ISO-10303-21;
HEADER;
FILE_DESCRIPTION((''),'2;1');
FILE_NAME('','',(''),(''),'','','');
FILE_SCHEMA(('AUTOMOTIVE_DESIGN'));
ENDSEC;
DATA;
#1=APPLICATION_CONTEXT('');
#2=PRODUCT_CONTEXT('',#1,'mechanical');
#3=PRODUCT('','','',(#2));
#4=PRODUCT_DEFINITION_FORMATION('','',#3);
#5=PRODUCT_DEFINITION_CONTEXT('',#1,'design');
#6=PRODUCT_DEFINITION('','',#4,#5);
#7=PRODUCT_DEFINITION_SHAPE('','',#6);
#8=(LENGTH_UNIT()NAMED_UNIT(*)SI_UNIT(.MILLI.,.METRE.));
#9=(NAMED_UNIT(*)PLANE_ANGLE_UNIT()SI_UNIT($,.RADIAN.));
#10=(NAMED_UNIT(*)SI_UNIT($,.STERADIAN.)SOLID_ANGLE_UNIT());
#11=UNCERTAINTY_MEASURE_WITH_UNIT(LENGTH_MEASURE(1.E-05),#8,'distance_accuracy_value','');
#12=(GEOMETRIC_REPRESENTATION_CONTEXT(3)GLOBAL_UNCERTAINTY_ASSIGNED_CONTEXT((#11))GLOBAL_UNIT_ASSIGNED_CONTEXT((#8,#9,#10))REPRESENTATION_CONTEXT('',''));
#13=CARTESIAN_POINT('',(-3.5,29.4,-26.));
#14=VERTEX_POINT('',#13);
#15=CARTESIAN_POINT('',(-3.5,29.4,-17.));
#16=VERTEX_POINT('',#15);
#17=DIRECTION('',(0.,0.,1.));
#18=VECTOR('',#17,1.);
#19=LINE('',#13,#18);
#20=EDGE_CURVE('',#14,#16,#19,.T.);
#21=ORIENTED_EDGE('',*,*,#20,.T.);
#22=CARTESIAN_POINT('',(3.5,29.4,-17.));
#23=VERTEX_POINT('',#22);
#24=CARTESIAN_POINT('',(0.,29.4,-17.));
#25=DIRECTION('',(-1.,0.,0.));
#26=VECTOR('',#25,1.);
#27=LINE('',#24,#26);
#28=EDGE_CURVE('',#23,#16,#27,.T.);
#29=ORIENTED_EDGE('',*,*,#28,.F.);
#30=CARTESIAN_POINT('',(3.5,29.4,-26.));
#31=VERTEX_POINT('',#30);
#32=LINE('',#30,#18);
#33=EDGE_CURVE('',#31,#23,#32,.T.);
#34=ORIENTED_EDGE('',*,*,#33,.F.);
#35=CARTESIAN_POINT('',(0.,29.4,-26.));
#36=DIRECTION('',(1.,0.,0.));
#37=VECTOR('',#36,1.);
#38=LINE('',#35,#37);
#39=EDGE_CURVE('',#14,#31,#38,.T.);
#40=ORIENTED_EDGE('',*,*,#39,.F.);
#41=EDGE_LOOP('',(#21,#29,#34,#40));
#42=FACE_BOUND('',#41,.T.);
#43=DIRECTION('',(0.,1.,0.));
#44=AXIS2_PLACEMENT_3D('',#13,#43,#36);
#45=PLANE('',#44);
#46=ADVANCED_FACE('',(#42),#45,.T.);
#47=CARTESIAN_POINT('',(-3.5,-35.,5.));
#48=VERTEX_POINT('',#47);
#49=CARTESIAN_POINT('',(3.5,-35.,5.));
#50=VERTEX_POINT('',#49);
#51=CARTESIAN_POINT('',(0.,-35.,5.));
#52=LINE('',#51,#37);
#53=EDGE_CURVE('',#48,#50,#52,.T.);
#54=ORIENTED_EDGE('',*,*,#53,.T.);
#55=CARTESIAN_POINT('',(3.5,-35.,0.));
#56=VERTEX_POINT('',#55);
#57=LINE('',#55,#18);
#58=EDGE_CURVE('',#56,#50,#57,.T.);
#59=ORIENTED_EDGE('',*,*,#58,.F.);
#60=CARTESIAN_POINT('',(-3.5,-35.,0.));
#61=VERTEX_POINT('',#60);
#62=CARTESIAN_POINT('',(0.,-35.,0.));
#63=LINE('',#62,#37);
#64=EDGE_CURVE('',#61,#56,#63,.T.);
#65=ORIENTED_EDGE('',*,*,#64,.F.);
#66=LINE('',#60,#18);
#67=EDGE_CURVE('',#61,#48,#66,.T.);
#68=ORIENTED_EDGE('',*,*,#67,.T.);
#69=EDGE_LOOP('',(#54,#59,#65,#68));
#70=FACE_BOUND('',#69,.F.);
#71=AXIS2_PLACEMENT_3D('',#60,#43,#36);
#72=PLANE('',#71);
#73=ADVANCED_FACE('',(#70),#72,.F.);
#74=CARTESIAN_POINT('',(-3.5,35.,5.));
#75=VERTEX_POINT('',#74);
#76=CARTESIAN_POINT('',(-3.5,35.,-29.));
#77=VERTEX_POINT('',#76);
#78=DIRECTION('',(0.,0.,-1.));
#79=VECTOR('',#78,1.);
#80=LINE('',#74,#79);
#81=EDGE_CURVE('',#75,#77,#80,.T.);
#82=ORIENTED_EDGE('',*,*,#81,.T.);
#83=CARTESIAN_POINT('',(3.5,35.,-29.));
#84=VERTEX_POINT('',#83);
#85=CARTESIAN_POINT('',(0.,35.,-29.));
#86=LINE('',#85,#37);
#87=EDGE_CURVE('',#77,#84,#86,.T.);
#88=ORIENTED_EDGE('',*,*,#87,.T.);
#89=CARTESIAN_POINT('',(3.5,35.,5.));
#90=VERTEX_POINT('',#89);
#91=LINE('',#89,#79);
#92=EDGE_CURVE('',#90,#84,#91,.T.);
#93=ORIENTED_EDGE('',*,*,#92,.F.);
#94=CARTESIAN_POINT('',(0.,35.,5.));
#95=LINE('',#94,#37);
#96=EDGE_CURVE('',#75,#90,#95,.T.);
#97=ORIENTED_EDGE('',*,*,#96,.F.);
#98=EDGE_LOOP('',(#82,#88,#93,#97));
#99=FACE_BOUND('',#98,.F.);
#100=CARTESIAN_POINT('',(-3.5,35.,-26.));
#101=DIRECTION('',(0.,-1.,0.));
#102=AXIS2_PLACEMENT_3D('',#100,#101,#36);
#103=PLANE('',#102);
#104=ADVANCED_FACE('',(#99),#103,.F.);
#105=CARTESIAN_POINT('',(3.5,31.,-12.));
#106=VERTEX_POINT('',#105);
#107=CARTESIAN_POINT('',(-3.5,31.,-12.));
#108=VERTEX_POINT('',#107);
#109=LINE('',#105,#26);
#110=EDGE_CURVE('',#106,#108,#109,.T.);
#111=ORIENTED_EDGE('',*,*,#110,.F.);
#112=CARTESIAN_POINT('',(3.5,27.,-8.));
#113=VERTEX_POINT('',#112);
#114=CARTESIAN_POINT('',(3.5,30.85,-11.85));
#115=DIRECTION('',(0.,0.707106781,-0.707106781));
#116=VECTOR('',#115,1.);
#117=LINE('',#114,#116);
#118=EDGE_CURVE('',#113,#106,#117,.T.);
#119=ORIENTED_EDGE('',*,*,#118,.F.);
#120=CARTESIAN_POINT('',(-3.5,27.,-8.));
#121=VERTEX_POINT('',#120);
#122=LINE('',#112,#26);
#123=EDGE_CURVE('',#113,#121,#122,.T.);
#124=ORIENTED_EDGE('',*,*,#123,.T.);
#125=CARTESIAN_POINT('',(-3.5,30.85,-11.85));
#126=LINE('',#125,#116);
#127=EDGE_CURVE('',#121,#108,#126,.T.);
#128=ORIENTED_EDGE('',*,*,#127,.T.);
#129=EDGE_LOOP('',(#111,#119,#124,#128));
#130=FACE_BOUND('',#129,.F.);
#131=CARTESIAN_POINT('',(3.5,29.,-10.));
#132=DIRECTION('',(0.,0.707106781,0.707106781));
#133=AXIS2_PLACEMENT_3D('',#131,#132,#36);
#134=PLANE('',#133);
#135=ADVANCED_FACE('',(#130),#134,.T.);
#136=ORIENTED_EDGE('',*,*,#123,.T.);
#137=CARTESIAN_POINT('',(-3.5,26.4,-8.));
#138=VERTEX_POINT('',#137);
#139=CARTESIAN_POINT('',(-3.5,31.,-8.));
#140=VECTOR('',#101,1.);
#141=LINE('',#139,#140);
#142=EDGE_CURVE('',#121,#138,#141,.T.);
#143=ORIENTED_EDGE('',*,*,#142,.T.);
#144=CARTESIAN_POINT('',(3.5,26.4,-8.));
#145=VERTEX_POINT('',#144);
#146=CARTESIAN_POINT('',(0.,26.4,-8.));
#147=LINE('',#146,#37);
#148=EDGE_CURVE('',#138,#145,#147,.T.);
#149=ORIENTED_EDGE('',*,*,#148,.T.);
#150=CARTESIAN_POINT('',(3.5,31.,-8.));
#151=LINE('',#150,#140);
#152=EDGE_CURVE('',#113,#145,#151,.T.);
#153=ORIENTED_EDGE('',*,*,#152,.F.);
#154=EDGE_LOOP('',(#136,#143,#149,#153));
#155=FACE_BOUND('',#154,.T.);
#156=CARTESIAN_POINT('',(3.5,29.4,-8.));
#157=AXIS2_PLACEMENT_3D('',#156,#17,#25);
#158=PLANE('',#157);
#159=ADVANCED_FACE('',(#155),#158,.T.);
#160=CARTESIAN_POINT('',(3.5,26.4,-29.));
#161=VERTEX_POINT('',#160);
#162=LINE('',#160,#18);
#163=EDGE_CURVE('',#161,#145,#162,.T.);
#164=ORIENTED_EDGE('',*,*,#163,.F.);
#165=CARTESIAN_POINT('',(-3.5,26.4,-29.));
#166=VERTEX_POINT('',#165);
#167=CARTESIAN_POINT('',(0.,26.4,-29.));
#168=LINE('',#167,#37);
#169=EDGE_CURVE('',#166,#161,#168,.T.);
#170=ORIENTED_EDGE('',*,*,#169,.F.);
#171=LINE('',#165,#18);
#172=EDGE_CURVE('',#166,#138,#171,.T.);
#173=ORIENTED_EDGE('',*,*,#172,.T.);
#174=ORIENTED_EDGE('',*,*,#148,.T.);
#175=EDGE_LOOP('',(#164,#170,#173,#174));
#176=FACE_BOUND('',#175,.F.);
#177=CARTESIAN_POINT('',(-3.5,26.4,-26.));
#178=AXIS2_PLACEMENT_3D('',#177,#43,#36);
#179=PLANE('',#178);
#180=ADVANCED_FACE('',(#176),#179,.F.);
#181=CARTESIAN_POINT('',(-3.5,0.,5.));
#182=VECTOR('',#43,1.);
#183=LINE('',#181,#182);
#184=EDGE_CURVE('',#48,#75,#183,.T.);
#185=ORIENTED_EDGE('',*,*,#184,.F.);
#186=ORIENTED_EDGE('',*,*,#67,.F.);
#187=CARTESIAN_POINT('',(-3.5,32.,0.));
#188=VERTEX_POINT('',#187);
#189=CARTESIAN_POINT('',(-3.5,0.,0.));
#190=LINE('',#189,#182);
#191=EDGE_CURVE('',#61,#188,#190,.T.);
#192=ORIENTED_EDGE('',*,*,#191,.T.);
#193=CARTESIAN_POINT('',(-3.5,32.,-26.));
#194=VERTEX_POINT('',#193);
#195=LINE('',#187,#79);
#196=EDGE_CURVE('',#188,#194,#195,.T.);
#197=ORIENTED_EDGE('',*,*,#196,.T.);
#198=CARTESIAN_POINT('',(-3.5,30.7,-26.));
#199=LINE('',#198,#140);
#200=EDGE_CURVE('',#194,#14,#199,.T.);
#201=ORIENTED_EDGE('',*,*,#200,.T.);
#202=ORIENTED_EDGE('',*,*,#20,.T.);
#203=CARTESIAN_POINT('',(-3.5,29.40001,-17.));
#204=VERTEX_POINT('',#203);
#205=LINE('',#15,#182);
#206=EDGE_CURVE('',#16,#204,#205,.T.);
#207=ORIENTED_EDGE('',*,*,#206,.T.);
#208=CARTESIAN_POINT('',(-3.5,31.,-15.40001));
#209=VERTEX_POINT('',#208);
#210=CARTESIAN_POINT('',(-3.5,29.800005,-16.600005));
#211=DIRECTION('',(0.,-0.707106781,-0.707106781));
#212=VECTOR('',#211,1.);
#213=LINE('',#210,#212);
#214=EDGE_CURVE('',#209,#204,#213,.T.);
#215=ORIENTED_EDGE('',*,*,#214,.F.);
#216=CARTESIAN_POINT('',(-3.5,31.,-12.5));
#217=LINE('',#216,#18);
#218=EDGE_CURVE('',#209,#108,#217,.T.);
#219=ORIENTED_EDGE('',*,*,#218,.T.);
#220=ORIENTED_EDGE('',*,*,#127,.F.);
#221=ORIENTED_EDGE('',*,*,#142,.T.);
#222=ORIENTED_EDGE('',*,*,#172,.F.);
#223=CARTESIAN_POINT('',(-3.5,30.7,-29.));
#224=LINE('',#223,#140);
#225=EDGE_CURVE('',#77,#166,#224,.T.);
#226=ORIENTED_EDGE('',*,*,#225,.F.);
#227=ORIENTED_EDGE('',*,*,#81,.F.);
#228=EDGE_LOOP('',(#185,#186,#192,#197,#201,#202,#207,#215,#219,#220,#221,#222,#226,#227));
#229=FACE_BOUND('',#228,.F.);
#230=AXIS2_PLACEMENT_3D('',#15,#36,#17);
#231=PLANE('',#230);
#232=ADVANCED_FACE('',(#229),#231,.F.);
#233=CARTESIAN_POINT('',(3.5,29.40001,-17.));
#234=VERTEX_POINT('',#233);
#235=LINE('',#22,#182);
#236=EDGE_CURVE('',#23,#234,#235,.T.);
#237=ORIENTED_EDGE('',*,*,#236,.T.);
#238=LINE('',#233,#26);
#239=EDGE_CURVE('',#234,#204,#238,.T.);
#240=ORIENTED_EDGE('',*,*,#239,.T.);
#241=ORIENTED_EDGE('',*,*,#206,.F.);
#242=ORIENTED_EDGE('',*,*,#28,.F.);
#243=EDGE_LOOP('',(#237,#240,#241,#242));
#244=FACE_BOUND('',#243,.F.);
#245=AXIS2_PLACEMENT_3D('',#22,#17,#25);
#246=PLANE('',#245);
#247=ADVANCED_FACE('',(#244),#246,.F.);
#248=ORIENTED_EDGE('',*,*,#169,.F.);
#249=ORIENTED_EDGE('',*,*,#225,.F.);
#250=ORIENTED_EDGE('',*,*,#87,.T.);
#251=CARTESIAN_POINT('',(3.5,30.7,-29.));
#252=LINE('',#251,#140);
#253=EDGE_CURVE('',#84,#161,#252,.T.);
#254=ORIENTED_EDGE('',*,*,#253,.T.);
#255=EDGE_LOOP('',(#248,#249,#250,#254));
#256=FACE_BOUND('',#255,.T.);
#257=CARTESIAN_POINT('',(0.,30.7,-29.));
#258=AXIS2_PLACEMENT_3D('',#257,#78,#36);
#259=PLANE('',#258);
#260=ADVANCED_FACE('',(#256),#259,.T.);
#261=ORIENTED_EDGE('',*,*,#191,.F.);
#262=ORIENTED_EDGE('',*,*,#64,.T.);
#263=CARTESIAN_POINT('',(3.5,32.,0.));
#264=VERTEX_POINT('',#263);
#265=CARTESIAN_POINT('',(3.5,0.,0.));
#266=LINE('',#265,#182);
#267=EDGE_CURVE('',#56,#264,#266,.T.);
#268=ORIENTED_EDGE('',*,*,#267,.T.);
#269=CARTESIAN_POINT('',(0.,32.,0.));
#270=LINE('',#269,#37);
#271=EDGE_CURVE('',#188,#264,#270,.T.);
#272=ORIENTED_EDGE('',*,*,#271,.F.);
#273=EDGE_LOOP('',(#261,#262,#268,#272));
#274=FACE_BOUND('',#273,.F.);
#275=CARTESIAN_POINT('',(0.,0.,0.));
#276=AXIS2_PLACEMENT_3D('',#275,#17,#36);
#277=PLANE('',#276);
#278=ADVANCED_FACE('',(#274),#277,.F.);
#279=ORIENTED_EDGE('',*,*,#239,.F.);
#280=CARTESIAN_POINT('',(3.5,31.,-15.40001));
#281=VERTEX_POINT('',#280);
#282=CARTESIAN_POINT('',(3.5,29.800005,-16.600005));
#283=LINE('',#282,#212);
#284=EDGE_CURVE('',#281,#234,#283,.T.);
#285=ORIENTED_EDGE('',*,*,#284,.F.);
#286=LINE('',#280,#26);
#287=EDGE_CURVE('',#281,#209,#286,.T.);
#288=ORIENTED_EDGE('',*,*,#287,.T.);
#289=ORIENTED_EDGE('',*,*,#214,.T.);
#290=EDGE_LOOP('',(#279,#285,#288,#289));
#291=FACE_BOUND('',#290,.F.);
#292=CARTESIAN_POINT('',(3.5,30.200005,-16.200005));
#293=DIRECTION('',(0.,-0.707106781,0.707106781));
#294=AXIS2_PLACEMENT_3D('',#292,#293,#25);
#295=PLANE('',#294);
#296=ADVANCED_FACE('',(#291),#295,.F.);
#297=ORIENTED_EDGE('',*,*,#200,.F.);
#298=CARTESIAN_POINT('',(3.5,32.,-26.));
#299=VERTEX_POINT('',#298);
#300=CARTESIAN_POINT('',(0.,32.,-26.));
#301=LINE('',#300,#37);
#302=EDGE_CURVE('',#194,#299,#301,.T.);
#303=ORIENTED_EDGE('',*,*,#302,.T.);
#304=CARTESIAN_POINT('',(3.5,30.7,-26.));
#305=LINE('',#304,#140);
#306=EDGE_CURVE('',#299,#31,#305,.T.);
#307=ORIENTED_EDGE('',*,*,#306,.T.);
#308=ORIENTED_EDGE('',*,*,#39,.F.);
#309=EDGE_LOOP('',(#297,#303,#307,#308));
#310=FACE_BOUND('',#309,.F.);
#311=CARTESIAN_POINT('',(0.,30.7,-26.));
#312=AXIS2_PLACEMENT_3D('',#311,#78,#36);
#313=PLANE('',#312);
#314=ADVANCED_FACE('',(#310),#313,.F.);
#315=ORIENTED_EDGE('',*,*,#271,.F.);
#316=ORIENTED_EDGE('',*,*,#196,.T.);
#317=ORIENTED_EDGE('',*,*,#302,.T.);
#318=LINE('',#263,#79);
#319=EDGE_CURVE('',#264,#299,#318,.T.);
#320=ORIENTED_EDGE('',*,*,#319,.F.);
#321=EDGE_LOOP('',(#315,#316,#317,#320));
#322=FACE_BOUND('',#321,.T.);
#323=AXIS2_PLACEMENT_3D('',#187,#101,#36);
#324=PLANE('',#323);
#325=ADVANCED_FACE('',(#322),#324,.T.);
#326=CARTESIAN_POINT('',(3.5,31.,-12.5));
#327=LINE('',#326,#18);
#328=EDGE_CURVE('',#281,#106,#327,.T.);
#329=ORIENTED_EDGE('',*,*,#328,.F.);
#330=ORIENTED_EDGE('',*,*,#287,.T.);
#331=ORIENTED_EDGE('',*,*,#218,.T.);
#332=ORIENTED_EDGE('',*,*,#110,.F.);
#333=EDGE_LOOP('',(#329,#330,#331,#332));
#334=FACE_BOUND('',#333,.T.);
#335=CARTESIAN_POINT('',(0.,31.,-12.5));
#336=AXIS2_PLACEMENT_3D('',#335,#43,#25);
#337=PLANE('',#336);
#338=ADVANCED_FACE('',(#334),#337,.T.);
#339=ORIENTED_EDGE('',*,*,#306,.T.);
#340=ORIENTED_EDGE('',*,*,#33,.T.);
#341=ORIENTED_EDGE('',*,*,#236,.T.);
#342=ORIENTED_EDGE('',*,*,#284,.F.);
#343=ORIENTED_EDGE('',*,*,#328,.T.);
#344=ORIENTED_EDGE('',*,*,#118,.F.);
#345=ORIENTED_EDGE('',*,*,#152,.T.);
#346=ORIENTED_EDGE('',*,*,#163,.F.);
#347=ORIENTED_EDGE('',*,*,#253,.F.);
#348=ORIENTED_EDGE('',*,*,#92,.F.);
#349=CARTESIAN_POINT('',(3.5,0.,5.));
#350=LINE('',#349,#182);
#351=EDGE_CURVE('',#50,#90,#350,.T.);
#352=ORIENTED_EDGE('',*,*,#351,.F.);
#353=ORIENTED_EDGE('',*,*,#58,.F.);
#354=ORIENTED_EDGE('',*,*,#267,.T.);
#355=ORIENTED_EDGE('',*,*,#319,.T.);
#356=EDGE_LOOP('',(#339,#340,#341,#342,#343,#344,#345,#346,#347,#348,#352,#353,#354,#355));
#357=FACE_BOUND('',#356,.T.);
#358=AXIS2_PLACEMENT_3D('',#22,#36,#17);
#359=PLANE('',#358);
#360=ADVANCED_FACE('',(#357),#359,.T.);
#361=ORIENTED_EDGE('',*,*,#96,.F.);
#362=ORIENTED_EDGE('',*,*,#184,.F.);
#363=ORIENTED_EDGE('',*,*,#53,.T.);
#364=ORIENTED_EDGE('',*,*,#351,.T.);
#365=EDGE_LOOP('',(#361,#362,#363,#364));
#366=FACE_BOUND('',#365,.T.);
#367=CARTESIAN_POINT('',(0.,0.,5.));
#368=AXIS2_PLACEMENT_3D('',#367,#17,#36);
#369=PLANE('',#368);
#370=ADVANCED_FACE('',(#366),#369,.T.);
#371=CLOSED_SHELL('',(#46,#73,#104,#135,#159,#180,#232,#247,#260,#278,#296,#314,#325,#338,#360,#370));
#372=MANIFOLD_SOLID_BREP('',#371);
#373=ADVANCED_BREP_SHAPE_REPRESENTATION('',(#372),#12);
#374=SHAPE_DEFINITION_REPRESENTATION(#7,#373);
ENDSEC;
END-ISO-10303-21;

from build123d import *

# Parameters (mm, degrees)
F0_W     = 7
F0_H     = 70
F1_DEPTH = 5
F2_W     = 7
F2_H     = 3
F3_DEPTH = 26
F4_W     = 7
F4_H     = 8.6
F5_DEPTH = 3
F6_W     = 7
F6_H     = 3
F7_DEPTH = 18
F8_W     = 7
F8_H     = 9
F9_DEPTH = 1.6
F10_SIZE = 4
F11_SIZE = 1.59999


# Not quite as in the source:
# - a fillet or chamfer is up to 0.001 mm smaller than in the source, because OpenCascade refuses the exact size


with BuildPart() as f1:
    # F0 (on Top) → F1 (new body)
    with BuildSketch(Plane.XY):
        Rectangle(F0_W, F0_H)
    extrude(amount=F1_DEPTH)

    # F2 (on face) → F3 (join)
    with BuildSketch(Plane(origin=(0, 0, 0), x_dir=(1, 0, 0), z_dir=(0, 0, -1))):
        with Locations((0, -33.5)):
            Rectangle(F2_W, F2_H)
    extrude(amount=F3_DEPTH)

    # F4 (on face) → F5 (join)
    with BuildSketch(Plane(origin=(0, 0, -26), x_dir=(1, 0, 0), z_dir=(0, 0, -1))):
        with Locations((0, -30.7)):
            Rectangle(F4_W, F4_H)
    extrude(amount=F5_DEPTH)

    # F6 (on face) → F7 (join)
    with BuildSketch(Plane.XY.offset(-26)):
        with Locations((0, 27.9)):
            Rectangle(F6_W, F6_H)
    extrude(amount=F7_DEPTH)

    # F8 (on face) → F9 (join)
    with BuildSketch(Plane(origin=(0, 29.4, 0), x_dir=(-1, 0, 0), z_dir=(0, 1, 0))):
        with Locations((0, -12.5)):
            Rectangle(F8_W, F8_H)
    extrude(amount=F9_DEPTH)

    # F10
    f10_edges = [f1.edges().sort_by_distance(p)[0] for p in [
        (0, 31, -8),
    ]]
    chamfer(f10_edges, length=F10_SIZE)

    # F11 (size 1.6 in the source; OpenCascade refuses exactly that, so slightly less here)
    f11_edges = [f1.edges().sort_by_distance(p)[0] for p in [
        (0, 31, -17),
    ]]
    chamfer(f11_edges, length=F11_SIZE)


solid = f1.part
